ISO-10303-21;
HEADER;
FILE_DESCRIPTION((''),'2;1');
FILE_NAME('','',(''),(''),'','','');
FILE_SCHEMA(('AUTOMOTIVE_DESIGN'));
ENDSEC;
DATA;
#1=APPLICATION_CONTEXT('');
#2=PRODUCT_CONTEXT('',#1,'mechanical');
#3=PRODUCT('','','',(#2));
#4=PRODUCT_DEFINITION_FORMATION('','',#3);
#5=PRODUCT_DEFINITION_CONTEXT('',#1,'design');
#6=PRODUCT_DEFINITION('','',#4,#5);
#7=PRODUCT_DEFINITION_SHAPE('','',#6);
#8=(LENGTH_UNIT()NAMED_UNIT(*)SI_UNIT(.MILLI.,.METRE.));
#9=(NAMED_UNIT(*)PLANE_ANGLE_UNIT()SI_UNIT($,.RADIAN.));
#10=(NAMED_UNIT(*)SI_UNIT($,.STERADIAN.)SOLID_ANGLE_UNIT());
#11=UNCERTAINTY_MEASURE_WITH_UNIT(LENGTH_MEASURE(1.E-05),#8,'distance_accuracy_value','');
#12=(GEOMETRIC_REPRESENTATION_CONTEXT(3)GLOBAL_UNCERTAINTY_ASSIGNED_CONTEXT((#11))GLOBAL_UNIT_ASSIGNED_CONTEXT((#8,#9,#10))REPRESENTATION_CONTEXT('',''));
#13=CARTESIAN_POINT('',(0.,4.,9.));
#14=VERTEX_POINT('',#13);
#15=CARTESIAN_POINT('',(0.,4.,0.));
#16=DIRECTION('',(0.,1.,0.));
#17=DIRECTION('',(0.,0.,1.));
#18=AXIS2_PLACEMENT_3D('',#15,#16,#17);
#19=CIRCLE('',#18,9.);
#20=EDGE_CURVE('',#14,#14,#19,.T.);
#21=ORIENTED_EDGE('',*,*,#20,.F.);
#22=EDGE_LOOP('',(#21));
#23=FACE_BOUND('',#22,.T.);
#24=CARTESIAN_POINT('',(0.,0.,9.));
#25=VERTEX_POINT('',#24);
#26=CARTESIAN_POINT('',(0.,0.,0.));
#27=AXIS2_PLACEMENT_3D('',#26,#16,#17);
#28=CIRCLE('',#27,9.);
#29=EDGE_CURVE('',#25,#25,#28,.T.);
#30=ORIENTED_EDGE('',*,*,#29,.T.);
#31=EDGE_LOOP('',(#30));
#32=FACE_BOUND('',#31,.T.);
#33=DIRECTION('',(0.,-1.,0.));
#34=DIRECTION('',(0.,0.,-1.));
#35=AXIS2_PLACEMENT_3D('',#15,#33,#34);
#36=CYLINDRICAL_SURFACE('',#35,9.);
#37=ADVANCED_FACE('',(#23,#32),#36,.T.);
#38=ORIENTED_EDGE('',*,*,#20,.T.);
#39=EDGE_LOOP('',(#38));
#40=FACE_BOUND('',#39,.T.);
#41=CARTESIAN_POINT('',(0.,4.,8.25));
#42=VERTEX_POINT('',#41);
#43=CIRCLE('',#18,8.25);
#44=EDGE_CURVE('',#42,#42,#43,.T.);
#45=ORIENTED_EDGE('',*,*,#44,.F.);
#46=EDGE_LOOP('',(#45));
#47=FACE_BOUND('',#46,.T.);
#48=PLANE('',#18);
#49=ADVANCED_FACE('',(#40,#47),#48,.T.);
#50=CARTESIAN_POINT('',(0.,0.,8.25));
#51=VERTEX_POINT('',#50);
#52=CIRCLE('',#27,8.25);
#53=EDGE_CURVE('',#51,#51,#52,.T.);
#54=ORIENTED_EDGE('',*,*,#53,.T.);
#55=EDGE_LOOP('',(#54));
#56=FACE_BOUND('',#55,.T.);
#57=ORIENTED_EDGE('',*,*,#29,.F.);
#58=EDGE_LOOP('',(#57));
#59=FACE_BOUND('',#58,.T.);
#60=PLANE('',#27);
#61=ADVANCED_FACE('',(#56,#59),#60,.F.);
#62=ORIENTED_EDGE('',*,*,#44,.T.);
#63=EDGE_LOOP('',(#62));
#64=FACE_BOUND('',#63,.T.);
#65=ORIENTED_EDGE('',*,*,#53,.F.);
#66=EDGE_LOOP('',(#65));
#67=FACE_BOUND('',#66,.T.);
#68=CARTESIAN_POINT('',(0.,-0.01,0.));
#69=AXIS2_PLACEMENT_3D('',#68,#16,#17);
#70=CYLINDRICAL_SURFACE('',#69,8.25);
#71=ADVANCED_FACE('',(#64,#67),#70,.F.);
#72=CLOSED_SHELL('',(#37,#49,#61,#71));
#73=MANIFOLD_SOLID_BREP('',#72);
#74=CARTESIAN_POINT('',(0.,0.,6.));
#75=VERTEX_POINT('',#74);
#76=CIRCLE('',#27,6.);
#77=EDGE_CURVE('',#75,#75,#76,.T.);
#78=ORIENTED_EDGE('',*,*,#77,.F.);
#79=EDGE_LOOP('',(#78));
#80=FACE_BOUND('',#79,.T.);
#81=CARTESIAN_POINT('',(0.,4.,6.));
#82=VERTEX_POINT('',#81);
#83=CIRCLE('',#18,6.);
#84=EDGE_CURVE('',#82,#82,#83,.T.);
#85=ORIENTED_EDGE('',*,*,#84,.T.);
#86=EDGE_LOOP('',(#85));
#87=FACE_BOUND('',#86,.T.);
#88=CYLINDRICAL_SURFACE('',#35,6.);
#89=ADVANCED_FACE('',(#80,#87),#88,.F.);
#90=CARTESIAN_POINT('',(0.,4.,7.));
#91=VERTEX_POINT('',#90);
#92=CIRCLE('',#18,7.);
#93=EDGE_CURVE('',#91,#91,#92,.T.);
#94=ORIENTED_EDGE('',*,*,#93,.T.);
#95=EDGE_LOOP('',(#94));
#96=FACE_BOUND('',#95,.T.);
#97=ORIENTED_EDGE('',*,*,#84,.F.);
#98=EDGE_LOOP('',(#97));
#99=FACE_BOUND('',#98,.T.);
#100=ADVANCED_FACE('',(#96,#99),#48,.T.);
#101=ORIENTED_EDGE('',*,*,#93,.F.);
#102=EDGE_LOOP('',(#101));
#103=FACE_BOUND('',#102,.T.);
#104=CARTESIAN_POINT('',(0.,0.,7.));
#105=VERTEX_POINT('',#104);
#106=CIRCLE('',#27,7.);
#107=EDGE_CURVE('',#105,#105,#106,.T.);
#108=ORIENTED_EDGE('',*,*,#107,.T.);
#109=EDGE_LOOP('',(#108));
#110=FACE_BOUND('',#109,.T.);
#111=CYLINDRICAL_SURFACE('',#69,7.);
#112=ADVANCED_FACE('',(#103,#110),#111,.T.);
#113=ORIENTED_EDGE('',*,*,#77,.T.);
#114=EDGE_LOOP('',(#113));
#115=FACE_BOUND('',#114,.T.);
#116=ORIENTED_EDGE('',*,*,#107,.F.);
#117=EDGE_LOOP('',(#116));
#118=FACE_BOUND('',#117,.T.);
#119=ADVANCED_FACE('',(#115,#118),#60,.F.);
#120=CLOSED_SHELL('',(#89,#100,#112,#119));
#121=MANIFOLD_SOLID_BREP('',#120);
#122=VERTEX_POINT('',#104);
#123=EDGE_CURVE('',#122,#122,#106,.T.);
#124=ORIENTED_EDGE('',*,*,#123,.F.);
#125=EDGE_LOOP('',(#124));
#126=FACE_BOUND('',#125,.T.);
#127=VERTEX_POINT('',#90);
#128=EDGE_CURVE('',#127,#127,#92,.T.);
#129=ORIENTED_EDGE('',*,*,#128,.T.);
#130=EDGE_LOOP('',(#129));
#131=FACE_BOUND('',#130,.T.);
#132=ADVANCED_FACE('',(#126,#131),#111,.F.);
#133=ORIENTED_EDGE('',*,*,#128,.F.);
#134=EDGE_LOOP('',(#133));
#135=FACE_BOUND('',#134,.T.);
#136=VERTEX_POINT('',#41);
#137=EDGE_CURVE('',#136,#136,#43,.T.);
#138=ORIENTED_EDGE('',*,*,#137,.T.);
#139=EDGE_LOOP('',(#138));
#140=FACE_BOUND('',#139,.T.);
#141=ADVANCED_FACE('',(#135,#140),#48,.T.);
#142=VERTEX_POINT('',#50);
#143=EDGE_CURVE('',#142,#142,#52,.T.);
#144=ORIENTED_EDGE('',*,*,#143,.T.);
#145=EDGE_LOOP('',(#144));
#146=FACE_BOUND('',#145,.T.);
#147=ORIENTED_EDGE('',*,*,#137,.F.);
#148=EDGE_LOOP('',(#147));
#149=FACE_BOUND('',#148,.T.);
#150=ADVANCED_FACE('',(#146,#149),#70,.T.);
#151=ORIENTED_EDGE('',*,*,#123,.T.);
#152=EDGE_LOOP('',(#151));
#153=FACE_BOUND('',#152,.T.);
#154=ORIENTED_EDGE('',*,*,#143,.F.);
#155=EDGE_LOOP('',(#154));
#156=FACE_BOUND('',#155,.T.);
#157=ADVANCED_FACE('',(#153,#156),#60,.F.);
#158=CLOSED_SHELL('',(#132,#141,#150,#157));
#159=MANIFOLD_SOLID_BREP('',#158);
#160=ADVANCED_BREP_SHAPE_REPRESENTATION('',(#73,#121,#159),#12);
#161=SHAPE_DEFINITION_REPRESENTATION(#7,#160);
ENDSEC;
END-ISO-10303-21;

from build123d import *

# Parameters (mm, degrees)
SKETCH_1_R                   = 9
SKETCH_1_R_2                 = 6
EXTRUDE_1_DEPTH              = 4
SPLIT_BODIES_1_OUTLINE_R     = 8.25
SPLIT_BODIES_1_OUTLINE_R_2   = 7
SPLIT_BODIES_1_DEPTH         = 4
SPLIT_BODIES_1_2_OUTLINE_R   = 9
SPLIT_BODIES_1_2_OUTLINE_R_2 = 7
SPLIT_BODIES_1_2_DEPTH       = 4
SPLIT_BODIES_1_3_OUTLINE_R   = 9
SPLIT_BODIES_1_3_OUTLINE_R_2 = 8.25
SPLIT_BODIES_1_3_DEPTH       = 4


# Read off the part's stored shape, not the designer's step: 分割1
with BuildPart() as part:
    # 草图1 → 凸台-拉伸1 (new body)
    with BuildSketch(Plane(origin=(0, 0, 0), x_dir=(1, 0, 0), z_dir=(0, 1, 0))):
        with Locations(Location((0, 0, 0), (0, 0, 270))):
            Circle(SKETCH_1_R)
        with Locations(Location((0, 0, 0), (0, 0, 270))):
            Circle(SKETCH_1_R_2, mode=Mode.SUBTRACT)
    extrude(amount=EXTRUDE_1_DEPTH)

    # Split Bodies 1 2 outline → Split Bodies 1 2 (cut)
    with BuildSketch(Plane(origin=(0, 0, 0), x_dir=(1, 0, 0), z_dir=(0, 1, 0))):
        Circle(SPLIT_BODIES_1_2_OUTLINE_R)
        Circle(SPLIT_BODIES_1_2_OUTLINE_R_2, mode=Mode.SUBTRACT)
    extrude(amount=SPLIT_BODIES_1_2_DEPTH, mode=Mode.SUBTRACT)


with BuildPart() as body_2:
    # Split Bodies 1 outline → Split Bodies 1 (new body)
    with BuildSketch(Plane(origin=(0, 0, 0), x_dir=(1, 0, 0), z_dir=(0, 1, 0))):
        Circle(SPLIT_BODIES_1_OUTLINE_R)
        Circle(SPLIT_BODIES_1_OUTLINE_R_2, mode=Mode.SUBTRACT)
    extrude(amount=SPLIT_BODIES_1_DEPTH)


with BuildPart() as body_3:
    # Split Bodies 1 3 outline → Split Bodies 1 3 (new body)
    with BuildSketch(Plane(origin=(0, 0, 0), x_dir=(1, 0, 0), z_dir=(0, 1, 0))):
        Circle(SPLIT_BODIES_1_3_OUTLINE_R)
        Circle(SPLIT_BODIES_1_3_OUTLINE_R_2, mode=Mode.SUBTRACT)
    extrude(amount=SPLIT_BODIES_1_3_DEPTH)


solid = Compound([part.part, body_2.part, body_3.part])
